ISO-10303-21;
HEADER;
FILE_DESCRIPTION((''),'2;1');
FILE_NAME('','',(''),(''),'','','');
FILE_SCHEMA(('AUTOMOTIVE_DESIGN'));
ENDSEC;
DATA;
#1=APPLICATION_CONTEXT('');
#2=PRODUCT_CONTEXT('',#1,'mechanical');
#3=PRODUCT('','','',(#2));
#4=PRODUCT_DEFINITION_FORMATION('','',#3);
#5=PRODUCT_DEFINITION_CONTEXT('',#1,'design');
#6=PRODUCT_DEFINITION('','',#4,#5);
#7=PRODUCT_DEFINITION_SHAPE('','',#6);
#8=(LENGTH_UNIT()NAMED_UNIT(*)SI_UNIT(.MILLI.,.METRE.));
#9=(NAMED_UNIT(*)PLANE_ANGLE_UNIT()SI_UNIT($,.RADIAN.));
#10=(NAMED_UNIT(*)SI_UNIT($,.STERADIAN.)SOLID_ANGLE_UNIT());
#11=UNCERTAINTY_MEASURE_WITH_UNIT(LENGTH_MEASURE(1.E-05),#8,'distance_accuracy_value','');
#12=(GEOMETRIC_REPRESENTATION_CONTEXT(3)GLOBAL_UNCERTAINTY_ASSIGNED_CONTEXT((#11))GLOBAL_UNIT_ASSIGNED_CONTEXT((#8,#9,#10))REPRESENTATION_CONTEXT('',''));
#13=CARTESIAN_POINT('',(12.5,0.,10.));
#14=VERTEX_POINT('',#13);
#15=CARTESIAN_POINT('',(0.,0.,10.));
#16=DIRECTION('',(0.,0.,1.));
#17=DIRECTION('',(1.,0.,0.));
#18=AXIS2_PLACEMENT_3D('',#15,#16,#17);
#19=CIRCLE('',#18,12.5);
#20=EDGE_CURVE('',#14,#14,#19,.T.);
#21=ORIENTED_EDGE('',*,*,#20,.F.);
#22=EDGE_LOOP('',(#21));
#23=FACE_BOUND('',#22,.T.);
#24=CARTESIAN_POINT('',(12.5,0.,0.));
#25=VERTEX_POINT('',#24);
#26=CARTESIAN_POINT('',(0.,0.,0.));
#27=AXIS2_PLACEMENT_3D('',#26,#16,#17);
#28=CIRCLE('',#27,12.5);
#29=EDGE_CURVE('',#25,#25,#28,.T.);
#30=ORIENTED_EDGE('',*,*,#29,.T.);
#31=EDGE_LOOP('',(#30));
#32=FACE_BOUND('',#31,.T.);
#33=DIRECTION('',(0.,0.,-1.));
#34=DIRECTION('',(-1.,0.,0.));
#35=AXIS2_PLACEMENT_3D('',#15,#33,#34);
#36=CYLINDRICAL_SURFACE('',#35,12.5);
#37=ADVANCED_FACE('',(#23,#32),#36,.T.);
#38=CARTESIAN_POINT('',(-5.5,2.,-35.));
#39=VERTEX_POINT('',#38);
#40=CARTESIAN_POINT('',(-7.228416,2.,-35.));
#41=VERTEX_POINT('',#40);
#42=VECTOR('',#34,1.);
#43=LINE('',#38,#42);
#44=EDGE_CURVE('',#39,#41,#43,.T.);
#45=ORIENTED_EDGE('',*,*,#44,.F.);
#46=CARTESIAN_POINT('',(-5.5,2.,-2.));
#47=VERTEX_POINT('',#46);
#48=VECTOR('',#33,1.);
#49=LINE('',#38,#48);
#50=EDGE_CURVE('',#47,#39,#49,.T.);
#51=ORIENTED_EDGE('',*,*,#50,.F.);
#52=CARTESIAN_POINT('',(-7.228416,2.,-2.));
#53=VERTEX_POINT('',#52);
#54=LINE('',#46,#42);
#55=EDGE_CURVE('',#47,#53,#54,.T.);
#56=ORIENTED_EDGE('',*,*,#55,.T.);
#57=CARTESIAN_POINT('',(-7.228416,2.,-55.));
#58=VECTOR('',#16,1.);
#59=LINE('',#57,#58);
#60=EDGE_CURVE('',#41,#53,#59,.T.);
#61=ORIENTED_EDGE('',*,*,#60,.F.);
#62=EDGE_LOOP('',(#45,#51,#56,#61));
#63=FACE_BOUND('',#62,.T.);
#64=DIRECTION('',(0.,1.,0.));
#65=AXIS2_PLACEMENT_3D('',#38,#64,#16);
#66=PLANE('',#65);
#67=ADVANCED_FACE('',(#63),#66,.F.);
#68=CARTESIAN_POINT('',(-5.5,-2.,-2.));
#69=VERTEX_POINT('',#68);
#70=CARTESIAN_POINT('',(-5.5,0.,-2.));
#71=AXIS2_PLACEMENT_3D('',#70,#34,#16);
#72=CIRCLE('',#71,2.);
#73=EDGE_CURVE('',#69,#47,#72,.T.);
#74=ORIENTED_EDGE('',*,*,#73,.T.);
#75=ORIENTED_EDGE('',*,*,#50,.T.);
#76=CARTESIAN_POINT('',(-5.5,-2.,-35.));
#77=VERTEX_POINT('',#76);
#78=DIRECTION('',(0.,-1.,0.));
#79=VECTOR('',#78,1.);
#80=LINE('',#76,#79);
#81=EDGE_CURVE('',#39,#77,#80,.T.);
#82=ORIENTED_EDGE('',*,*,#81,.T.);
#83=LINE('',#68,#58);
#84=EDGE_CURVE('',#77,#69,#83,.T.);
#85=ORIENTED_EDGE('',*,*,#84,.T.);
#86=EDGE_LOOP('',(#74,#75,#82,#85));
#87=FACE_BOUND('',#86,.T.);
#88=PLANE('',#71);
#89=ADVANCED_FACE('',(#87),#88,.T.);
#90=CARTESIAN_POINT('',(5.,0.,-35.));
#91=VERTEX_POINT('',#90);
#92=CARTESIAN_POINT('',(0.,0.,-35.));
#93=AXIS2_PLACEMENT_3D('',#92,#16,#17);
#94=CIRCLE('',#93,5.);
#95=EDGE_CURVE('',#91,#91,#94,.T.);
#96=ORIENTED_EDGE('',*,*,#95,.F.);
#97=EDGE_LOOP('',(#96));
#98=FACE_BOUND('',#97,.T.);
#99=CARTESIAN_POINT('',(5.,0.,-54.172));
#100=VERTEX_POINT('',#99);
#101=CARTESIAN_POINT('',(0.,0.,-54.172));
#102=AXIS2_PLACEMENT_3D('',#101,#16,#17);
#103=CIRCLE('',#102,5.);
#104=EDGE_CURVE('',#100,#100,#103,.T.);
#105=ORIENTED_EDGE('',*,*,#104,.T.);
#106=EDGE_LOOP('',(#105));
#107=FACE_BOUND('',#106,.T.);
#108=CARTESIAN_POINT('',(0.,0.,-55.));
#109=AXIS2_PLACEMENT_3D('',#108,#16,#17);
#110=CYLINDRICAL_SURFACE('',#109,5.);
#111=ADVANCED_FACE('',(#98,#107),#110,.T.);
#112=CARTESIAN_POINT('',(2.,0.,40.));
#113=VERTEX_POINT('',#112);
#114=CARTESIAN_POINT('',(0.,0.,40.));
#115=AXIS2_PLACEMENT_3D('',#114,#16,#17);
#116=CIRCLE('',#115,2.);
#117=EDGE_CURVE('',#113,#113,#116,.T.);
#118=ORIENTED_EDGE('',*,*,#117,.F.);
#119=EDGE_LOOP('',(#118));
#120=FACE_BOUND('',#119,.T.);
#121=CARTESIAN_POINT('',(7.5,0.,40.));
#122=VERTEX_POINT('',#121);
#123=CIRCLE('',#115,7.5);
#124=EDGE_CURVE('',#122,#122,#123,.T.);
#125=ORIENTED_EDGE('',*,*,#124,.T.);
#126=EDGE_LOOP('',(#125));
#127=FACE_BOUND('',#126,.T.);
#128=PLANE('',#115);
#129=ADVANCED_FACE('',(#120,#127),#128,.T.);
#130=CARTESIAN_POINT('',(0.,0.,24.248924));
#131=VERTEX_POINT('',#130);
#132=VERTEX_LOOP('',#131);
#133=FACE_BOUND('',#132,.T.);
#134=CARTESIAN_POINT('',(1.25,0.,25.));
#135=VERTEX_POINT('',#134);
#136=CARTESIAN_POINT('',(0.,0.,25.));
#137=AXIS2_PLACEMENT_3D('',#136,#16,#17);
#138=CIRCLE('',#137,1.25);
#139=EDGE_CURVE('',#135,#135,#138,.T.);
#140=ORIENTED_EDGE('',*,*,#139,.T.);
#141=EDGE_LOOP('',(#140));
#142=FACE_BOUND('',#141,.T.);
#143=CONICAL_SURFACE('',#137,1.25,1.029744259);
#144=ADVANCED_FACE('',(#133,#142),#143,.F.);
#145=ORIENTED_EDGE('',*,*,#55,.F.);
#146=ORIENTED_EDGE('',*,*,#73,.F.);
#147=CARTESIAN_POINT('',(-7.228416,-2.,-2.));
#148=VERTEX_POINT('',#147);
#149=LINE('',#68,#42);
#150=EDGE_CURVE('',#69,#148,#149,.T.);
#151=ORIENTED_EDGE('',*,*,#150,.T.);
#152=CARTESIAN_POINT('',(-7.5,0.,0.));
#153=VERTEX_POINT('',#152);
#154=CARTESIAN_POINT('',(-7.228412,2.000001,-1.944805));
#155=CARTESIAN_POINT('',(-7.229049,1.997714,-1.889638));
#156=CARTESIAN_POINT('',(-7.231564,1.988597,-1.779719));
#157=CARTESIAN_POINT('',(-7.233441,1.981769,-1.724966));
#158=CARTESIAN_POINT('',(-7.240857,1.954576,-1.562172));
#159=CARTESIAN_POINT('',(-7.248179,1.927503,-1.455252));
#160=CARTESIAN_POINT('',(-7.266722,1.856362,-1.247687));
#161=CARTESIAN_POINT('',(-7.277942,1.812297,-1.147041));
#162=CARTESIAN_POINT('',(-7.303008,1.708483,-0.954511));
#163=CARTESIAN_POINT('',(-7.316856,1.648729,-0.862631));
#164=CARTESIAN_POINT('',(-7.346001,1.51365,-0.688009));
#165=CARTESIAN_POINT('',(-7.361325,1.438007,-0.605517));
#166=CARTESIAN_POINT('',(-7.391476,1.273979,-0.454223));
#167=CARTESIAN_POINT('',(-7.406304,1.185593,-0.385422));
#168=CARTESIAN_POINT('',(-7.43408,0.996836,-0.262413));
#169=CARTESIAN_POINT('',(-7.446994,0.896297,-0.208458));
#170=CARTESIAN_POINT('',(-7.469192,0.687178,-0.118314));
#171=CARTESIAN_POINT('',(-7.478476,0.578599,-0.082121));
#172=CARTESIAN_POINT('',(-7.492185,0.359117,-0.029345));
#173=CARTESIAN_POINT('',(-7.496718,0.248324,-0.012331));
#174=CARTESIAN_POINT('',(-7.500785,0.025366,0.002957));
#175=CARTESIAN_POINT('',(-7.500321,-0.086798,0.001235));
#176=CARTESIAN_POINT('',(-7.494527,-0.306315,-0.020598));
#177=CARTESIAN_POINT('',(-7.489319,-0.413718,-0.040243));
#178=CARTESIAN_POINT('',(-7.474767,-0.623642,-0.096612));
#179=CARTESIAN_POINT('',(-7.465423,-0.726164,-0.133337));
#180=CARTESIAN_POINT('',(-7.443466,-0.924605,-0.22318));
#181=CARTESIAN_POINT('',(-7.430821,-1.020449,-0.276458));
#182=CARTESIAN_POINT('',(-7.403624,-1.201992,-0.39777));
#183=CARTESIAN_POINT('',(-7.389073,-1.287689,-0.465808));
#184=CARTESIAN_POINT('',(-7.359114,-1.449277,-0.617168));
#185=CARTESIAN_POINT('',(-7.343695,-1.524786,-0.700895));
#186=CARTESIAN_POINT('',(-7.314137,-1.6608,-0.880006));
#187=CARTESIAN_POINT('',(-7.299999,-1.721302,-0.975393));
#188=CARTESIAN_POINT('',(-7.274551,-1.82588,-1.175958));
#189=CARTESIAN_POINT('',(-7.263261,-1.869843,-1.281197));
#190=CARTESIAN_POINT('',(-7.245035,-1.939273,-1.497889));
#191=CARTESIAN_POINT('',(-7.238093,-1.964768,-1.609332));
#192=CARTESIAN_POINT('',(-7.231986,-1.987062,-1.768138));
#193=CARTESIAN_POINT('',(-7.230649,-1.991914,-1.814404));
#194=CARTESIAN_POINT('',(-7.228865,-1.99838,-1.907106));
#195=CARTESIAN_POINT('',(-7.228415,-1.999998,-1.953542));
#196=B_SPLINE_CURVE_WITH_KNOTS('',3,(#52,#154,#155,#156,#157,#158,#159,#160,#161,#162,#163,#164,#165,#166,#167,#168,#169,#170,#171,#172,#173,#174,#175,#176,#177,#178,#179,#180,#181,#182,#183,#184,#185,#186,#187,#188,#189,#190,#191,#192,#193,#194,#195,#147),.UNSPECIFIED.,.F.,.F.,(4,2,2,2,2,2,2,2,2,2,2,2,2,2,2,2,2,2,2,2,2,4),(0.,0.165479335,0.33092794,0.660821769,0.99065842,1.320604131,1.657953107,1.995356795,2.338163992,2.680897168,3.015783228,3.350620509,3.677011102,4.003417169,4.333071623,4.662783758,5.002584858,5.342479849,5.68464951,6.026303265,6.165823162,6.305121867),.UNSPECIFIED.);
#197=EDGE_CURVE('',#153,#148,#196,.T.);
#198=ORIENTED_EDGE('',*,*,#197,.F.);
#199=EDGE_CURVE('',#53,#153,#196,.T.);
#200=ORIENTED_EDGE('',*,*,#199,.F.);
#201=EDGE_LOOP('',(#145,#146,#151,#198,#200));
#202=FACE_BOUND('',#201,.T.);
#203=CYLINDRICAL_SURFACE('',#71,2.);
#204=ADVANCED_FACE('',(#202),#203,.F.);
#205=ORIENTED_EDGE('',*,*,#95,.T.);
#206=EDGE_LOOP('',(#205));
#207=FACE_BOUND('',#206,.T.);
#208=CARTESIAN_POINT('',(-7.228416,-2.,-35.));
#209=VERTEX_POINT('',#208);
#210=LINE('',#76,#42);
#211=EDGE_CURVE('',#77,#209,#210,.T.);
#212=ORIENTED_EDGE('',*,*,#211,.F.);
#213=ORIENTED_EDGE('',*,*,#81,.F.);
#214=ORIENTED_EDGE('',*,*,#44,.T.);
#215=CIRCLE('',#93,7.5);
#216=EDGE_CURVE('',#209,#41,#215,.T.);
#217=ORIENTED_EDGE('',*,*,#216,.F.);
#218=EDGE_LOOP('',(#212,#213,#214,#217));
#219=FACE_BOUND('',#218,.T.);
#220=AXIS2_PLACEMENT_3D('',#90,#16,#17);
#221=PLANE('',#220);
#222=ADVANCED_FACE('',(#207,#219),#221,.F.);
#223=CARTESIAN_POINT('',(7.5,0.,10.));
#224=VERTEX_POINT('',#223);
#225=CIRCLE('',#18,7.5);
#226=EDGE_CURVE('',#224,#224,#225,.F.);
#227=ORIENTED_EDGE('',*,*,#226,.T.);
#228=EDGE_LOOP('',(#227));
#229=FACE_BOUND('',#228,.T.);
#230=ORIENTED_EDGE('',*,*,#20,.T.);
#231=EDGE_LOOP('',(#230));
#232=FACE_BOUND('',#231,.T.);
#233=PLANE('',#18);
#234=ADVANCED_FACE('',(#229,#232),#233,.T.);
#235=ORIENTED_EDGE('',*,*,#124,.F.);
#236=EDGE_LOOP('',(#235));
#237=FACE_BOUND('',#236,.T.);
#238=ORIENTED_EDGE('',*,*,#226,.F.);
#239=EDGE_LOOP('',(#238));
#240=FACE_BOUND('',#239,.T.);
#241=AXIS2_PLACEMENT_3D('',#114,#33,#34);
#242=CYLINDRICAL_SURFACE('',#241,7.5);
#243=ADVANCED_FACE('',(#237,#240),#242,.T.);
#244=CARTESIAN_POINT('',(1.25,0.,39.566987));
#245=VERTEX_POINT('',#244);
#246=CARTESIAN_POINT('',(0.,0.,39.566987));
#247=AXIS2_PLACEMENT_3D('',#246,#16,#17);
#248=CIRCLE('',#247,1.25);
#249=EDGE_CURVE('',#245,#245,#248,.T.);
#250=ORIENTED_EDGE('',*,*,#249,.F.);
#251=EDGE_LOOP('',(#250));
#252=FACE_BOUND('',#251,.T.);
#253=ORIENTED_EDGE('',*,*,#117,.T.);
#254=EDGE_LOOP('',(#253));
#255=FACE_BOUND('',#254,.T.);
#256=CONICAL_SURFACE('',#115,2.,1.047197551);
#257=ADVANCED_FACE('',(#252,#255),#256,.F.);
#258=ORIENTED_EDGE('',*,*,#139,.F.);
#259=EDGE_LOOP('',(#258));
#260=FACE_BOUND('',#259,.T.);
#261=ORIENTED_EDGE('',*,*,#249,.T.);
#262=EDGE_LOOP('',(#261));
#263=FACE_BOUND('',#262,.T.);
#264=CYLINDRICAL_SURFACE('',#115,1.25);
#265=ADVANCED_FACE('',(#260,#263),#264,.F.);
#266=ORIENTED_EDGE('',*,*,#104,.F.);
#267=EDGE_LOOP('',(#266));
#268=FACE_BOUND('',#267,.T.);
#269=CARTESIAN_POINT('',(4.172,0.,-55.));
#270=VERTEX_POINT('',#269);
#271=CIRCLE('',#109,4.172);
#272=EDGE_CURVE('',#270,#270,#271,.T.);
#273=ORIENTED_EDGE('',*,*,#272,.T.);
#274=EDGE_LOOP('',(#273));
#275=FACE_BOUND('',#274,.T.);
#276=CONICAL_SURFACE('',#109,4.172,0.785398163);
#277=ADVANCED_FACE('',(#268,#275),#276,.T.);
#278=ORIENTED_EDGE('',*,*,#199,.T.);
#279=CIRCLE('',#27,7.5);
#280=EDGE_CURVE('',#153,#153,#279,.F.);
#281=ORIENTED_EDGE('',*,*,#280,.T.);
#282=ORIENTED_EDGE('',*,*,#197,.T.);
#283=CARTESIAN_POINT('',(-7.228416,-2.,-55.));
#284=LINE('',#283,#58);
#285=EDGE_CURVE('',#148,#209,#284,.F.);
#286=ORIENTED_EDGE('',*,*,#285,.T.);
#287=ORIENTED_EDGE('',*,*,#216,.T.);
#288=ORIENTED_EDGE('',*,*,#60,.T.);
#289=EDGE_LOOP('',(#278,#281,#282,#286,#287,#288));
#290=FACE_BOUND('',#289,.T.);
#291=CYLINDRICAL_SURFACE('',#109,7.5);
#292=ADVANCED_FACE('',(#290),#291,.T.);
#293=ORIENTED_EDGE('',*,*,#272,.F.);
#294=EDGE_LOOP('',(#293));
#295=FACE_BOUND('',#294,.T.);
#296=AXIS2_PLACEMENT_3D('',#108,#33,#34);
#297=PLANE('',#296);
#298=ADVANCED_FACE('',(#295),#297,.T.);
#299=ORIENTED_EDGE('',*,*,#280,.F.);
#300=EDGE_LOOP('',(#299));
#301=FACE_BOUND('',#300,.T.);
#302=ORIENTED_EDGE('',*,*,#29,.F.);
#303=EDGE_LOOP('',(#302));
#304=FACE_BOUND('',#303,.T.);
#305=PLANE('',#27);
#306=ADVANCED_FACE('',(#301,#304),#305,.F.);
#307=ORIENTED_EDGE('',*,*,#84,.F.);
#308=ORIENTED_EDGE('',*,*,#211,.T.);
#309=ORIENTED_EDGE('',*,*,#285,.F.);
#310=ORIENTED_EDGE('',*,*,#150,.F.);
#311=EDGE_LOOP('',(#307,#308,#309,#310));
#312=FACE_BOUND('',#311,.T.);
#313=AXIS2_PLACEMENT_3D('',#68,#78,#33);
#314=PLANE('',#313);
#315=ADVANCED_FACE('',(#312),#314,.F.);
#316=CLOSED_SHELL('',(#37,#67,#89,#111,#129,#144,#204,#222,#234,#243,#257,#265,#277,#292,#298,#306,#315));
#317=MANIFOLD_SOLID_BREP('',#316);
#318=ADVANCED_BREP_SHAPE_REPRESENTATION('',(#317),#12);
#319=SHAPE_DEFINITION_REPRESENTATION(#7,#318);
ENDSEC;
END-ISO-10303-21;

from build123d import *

# Parameters (mm, degrees)
SKETCH1_R                       = 12.5
F_25MM_DIA_DEPTH                = 10
F_15MM_START                    = -10
SKETCH2_R                       = 7.5
F_15MM_DIA_BEARING_END_DEPTH    = 40
F_15MM_START_2                  = 55
SKETCH3_R                       = 7.5
F_15MM_DIA_GEAR_END_DEPTH       = 55
M3X0_5_TAPPED_HOLE1_D           = 2.5
M3X0_5_TAPPED_HOLE1_DEPTH       = 15
M3X0_5_TAPPED_HOLE1_CSINK_D     = 4
M3X0_5_TAPPED_HOLE1_CSINK_ANGLE = 120
M3X0_5_TAPPED_HOLE1_TIP         = 0.751075774
CUT_EXTRUDE1_DEPTH              = 2


# Read off the part's stored shape, not the designer's step: M10x1.5 Machine Threads Stud1
with BuildPart() as part:
    # Sketch1 → 25mm dia (new body)
    with BuildSketch(Plane.XY):
        Circle(SKETCH1_R)
    extrude(amount=F_25MM_DIA_DEPTH)

    # Sketch2 → 15mm dia bearing end (add)
    with BuildSketch(Plane.XY.offset(10).offset(F_15MM_START)):
        Circle(SKETCH2_R)
    extrude(amount=F_15MM_DIA_BEARING_END_DEPTH)

    # Sketch3 → 15mm dia gear end (add)
    with BuildSketch(Plane(origin=(0, 0, 0), x_dir=(-1, 0, 0), z_dir=(0, 0, -1)).offset(F_15MM_START_2)):
        with Locations(Location((0, 0, 0), (0, 0, 180))):
            Circle(SKETCH3_R)
    extrude(amount=-F_15MM_DIA_GEAR_END_DEPTH)

    # M3x0.5 Tapped Hole1
    with Locations(Plane.XY.offset(40)):
        with Locations((0, 0)):
            CounterSinkHole(M3X0_5_TAPPED_HOLE1_D / 2, M3X0_5_TAPPED_HOLE1_CSINK_D / 2, depth=M3X0_5_TAPPED_HOLE1_DEPTH, counter_sink_angle=M3X0_5_TAPPED_HOLE1_CSINK_ANGLE)
            with Locations((0, 0, -(M3X0_5_TAPPED_HOLE1_DEPTH + M3X0_5_TAPPED_HOLE1_TIP / 2))):  # 118° drill point
                Cone(0, M3X0_5_TAPPED_HOLE1_D / 2, M3X0_5_TAPPED_HOLE1_TIP, mode=Mode.SUBTRACT)

    # M10x1.5 Machine Threads Stud1 outline → M10x1.5 Machine Threads Stud1 (revolve, cut)
    with BuildSketch(Plane.XZ):
        Polygon((4.172, -55), (7.5, -55), (7.5, -35), (5, -35), (5, -54.172), align=None)
    revolve(axis=Axis((0, 0, 0), (0, 0, 1)), mode=Mode.SUBTRACT)

    # Sketch15 → Cut-Extrude1 (cut)
    with BuildSketch(Plane.ZY.offset(7.5)):
        with BuildLine():
            Line((-35, 2), (-2, 2))
            ThreePointArc((-2, 2), (0, 0), (-2, -2))
            Line((-2, -2), (-35, -2))
            Line((-35, -2), (-35, 2))
        make_face()
    extrude(amount=-CUT_EXTRUDE1_DEPTH, mode=Mode.SUBTRACT)


solid = part.part
